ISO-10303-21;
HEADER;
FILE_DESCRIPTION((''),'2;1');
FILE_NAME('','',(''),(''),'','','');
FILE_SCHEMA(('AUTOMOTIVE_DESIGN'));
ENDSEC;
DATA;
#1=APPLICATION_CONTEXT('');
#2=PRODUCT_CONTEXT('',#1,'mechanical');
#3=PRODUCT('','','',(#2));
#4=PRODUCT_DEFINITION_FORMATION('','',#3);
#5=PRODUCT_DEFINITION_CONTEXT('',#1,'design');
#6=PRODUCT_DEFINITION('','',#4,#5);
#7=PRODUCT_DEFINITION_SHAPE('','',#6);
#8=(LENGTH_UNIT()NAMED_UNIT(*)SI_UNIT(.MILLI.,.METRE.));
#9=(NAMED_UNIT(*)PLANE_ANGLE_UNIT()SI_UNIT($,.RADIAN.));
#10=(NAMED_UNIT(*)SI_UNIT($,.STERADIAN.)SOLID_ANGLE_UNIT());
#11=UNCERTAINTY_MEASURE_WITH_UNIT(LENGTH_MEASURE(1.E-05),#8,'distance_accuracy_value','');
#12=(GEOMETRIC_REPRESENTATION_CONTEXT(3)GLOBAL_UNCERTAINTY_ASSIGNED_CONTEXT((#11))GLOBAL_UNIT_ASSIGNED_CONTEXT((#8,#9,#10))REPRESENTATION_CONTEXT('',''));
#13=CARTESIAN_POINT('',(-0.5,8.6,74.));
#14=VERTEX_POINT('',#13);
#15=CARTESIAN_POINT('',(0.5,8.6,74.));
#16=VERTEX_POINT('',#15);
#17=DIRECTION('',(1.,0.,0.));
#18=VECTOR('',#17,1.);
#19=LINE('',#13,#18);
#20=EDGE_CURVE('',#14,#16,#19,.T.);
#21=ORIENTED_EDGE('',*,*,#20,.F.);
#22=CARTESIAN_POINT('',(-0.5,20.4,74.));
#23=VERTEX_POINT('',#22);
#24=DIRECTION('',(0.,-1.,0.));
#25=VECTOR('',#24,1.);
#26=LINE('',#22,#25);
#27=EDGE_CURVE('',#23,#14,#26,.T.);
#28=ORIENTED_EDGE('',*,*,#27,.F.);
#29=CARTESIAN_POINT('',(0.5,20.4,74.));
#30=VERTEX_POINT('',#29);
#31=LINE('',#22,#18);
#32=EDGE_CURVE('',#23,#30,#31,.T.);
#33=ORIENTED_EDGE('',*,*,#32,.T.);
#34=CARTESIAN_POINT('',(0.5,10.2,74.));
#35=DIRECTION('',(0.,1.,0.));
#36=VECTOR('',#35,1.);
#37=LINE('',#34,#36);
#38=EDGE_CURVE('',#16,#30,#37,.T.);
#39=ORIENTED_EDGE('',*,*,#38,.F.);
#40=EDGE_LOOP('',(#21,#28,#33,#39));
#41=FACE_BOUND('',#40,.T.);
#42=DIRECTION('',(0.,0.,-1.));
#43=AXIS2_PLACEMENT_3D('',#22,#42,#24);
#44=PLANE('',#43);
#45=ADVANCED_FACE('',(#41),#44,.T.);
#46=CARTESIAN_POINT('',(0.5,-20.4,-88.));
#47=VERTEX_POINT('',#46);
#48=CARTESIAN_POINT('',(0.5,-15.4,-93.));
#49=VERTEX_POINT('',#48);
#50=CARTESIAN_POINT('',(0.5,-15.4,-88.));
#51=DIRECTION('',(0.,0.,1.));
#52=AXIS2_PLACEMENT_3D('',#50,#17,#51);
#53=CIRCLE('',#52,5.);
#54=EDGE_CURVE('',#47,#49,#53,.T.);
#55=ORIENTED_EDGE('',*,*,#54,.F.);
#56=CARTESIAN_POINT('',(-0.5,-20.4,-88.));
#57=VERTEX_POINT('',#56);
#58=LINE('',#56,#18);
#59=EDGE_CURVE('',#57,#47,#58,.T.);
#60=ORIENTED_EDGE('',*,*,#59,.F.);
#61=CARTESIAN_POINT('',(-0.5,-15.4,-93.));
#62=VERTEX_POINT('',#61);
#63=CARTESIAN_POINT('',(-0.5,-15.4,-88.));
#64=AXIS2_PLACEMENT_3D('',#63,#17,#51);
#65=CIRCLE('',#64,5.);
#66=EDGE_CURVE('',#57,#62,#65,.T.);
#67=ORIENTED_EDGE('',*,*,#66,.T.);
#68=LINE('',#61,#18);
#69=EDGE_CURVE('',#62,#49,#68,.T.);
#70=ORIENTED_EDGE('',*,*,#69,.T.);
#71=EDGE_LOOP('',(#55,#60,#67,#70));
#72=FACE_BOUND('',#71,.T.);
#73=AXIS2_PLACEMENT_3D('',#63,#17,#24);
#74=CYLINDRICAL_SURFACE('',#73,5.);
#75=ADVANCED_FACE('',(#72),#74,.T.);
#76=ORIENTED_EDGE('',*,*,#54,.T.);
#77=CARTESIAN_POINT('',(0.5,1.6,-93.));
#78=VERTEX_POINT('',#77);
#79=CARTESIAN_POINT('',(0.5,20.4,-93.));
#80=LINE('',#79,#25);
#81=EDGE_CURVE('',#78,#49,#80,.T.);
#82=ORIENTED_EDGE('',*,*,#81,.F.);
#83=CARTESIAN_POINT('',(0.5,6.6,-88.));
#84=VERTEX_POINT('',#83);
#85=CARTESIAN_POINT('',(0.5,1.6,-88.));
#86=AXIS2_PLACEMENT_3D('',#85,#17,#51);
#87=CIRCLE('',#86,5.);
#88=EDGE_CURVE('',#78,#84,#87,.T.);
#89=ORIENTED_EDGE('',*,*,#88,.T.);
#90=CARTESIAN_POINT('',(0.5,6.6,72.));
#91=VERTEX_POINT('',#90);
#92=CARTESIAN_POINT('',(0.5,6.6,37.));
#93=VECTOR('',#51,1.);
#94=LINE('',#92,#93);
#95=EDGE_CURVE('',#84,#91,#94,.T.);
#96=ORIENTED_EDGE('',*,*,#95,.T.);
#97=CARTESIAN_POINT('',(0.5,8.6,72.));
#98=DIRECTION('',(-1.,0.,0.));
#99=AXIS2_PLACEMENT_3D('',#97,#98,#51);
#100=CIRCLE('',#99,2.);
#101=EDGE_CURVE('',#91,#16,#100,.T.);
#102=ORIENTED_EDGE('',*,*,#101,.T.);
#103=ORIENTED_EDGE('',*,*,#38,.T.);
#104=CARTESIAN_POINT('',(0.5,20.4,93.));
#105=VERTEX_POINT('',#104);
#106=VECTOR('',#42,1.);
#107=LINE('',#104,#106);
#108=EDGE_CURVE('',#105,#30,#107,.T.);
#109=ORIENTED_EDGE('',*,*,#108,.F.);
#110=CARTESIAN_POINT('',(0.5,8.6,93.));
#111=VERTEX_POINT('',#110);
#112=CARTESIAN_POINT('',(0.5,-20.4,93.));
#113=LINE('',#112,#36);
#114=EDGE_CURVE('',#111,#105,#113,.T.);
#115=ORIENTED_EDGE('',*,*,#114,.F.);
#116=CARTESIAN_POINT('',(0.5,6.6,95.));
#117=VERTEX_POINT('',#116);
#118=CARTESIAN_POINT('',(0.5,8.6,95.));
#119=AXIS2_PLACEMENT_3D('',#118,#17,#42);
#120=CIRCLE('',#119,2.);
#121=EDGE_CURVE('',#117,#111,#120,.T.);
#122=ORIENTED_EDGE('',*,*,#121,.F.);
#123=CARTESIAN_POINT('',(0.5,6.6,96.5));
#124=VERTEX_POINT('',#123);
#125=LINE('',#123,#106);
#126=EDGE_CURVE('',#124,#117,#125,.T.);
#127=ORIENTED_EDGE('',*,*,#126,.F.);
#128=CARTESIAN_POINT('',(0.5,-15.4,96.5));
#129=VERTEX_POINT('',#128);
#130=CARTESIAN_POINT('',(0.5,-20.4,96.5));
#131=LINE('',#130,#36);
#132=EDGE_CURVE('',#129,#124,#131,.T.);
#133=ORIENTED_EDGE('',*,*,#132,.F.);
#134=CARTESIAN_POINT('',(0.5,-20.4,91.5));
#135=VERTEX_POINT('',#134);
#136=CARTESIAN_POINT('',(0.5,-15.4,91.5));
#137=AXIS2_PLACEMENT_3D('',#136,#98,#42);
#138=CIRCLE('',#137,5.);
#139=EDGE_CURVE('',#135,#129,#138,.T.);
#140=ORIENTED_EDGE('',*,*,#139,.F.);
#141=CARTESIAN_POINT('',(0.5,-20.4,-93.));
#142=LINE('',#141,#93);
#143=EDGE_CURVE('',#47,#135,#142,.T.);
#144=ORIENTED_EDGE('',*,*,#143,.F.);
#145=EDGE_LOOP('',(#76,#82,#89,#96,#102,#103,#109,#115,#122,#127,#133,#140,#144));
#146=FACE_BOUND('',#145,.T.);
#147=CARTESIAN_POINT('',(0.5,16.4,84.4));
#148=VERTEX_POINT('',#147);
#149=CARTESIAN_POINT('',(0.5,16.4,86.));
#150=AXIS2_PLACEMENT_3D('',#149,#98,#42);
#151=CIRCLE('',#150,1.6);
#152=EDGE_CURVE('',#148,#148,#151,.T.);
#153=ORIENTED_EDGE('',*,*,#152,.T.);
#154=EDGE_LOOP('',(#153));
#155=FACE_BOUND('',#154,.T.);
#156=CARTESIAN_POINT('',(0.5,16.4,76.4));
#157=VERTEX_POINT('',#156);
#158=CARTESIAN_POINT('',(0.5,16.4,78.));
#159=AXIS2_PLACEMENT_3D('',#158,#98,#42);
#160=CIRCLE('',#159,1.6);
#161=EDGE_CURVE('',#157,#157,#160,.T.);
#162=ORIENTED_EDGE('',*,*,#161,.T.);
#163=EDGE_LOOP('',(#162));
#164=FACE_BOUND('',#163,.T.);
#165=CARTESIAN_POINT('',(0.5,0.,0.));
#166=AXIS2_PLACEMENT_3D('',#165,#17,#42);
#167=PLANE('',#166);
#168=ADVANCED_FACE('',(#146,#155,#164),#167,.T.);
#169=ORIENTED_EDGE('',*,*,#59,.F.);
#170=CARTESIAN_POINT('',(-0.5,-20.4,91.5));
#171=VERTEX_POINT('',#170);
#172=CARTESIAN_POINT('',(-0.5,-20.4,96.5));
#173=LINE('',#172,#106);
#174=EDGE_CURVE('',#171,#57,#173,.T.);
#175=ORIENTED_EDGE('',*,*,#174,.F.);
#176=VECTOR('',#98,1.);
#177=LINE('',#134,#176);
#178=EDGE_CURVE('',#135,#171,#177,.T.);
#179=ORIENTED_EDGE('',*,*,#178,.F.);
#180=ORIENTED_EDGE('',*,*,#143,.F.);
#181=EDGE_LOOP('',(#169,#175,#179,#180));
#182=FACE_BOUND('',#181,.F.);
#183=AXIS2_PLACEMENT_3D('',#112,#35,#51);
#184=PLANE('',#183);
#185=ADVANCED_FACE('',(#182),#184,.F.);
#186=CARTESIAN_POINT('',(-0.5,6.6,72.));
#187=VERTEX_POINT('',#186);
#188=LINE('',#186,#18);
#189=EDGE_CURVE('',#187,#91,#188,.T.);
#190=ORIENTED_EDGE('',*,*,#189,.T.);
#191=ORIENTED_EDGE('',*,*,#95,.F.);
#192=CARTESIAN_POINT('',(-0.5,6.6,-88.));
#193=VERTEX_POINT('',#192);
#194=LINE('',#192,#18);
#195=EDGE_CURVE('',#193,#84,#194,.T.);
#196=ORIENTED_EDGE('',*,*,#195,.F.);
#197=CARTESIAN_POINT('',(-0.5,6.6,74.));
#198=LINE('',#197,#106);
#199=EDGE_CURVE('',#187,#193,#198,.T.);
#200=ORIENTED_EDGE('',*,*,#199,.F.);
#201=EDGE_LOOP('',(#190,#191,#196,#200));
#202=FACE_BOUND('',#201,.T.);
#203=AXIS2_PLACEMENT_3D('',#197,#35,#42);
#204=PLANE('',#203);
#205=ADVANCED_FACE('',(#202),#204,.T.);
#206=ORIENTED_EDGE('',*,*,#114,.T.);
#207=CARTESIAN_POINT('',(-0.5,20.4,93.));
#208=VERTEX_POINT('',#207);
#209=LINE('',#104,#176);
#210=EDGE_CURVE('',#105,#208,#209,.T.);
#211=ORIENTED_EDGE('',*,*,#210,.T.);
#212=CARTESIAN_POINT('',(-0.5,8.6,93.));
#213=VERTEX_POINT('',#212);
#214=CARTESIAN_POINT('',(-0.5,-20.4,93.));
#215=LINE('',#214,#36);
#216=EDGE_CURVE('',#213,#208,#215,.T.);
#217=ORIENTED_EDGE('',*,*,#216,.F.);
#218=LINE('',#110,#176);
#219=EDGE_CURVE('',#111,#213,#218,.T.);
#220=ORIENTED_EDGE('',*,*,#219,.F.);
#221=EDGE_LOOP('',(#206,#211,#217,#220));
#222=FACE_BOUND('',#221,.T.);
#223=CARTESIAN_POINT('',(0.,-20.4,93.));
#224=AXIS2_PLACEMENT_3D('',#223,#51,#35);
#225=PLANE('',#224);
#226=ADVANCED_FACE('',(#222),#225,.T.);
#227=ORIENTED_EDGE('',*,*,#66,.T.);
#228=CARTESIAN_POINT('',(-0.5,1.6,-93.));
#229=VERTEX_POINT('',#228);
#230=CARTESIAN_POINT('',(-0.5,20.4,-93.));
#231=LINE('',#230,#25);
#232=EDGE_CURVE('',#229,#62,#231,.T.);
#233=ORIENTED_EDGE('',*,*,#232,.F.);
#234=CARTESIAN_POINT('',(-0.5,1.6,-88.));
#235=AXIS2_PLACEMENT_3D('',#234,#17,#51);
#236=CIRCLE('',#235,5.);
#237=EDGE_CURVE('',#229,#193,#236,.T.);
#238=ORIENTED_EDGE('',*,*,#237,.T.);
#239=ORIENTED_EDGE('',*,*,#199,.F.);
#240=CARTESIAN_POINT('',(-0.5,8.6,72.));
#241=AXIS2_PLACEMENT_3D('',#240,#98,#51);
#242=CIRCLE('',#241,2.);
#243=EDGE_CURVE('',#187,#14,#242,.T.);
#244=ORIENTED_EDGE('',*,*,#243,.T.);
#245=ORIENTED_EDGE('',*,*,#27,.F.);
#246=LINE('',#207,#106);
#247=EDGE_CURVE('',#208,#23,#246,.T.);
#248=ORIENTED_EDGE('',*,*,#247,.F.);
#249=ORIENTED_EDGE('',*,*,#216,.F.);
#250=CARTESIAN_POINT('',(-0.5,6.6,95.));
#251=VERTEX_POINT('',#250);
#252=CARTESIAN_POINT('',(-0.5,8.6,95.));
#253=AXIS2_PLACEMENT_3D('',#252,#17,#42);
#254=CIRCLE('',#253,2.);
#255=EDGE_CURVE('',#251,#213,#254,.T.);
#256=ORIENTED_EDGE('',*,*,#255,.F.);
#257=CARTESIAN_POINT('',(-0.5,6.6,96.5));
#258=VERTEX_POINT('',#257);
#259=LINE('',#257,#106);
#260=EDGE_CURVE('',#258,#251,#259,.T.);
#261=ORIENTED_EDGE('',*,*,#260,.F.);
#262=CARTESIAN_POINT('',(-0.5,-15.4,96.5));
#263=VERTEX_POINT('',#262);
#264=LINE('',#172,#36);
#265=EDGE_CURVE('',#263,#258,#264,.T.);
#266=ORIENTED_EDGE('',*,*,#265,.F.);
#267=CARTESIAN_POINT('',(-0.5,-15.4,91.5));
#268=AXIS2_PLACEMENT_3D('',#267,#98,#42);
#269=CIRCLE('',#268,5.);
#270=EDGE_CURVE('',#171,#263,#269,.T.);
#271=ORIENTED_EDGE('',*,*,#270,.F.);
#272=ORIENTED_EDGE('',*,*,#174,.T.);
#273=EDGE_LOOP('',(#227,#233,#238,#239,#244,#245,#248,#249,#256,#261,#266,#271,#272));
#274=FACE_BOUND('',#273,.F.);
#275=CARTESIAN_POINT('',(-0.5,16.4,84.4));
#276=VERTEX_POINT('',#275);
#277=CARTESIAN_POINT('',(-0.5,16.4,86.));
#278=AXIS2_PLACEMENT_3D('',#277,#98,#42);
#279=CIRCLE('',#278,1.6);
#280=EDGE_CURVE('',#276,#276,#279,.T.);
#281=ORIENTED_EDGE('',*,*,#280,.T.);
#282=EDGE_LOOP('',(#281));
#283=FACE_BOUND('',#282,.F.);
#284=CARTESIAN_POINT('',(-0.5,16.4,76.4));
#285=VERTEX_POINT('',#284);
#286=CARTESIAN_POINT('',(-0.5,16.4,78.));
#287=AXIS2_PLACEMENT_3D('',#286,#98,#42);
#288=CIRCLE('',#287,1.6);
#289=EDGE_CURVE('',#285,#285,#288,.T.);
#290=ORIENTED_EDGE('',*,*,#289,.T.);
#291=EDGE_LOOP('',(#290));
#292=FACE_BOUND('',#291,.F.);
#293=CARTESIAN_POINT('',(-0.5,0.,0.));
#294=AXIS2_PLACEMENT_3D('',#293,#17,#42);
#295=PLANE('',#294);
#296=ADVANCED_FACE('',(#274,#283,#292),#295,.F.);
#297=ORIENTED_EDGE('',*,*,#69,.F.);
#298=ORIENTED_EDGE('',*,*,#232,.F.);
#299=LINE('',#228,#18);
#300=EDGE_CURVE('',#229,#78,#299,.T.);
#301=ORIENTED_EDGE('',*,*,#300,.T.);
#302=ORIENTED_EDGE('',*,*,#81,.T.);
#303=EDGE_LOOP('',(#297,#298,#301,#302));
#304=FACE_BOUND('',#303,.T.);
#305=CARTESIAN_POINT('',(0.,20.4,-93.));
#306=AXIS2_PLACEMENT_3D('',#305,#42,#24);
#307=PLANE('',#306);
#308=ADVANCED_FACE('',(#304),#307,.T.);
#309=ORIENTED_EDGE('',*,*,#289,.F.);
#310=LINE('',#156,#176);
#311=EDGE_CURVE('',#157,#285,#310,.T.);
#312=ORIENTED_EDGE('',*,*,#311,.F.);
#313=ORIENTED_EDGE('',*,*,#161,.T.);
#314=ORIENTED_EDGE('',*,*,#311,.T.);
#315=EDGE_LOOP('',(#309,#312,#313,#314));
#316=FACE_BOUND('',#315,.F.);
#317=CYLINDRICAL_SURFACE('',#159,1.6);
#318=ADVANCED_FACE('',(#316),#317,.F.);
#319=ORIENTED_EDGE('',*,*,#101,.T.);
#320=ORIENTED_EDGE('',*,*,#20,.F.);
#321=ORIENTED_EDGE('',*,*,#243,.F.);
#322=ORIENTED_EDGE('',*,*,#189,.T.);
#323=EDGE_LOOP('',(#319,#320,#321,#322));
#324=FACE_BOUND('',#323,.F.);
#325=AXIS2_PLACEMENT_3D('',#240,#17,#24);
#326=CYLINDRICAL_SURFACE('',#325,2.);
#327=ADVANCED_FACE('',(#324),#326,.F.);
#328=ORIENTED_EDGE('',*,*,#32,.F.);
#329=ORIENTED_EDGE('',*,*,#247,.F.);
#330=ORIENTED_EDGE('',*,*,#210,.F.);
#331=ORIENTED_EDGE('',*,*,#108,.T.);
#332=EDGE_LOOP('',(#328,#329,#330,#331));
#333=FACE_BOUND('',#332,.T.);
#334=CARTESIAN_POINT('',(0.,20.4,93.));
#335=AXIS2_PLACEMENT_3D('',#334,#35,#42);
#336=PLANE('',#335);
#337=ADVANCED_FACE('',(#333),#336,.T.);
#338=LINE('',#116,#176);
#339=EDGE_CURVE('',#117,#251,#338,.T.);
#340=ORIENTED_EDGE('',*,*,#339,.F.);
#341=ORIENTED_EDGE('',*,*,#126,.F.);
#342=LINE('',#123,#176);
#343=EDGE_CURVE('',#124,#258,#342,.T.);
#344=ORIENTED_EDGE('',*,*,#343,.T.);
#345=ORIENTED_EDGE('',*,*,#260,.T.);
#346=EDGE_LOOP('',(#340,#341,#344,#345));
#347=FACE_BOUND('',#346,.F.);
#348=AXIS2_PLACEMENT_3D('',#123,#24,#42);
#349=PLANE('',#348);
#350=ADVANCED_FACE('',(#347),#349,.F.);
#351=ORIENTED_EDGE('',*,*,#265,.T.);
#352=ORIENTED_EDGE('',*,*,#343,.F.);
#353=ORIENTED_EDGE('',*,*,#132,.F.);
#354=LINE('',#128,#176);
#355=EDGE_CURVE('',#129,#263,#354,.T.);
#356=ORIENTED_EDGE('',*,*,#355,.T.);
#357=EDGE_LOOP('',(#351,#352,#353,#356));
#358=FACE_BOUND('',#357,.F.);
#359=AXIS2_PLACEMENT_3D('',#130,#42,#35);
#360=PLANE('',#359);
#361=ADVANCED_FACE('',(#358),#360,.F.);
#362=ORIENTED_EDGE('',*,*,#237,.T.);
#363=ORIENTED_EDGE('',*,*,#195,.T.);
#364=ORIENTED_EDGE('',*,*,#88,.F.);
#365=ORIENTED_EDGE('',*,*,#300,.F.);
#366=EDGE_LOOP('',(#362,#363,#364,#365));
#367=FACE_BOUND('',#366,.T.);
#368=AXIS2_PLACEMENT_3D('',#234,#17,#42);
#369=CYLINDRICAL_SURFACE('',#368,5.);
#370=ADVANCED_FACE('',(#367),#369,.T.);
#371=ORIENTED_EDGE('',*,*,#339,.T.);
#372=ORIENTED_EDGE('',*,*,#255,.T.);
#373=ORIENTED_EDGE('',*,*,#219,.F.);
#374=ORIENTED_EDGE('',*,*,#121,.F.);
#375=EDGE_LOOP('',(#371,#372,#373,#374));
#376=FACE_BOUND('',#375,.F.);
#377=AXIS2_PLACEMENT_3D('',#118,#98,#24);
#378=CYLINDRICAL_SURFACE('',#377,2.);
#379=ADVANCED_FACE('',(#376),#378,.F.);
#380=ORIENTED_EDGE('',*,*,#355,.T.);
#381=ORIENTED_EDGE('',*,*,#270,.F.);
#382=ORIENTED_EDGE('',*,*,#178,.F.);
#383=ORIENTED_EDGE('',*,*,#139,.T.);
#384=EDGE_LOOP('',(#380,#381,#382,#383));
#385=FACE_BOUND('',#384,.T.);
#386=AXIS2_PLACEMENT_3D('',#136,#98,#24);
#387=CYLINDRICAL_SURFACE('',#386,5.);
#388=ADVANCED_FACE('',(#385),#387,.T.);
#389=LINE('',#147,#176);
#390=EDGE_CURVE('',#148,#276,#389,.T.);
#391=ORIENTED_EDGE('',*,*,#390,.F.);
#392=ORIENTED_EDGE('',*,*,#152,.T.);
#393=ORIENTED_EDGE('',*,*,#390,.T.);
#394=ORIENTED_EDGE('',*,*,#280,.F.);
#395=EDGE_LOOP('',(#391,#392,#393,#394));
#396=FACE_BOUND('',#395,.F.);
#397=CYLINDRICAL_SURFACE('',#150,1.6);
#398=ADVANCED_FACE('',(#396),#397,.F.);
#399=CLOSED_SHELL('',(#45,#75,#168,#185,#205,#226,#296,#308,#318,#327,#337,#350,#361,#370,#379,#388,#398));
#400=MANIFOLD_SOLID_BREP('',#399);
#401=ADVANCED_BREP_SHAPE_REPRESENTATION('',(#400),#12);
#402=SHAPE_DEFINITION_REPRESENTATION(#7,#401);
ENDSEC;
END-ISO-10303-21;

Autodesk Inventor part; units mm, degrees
ref_plane "YZ Plane" through (0, 0, 0) normal (1, 0, 0) x (0, 1, 0)
ref_plane "XZ Plane" through (0, 0, 0) normal (0, 1, 0) x (-1, 0, 0)
ref_plane "XY Plane" through (0, 0, 0) normal (0, 0, 1) x (1, 0, 0)
sketch "スケッチ1" plane through (0, 0, 0) normal (1, 0, 0) x (0, 1, 0)
  line L0 (-20.4, 93) -> (20.4, 93)
  line L1 (20.4, 93) -> (20.4, -93)
  line L2 (20.4, -93) -> (-20.4, -93)
  line L3 (-20.4, -93) -> (-20.4, 93)
  line L4 (-20.4, 93) -> (20.4, -93) construction
  line L5 (20.4, 93) -> (-20.4, -93) construction
  line L6 (20.4, 93) -> (-20.4, 93)
  line L7 (-20.4, 93) -> (-20.4, 95)
  line L8 (-20.4, 95) -> (20.4, 95)
  line L9 (20.4, 95) -> (20.4, 93)
  point P0 (0, 0)
  dimension "d0" = 40.8
  dimension "d1" = 186
  dimension "d19" = 2
extrude "プレート1" add sketch "スケッチ1" along normal mid plane 1 contours L0 L1 L2 L3
sketch "スケッチ2" plane through (0.5, 0, 0) normal (1, 0, 0) x (0, 0, -1)
  line L0 (-93, 20.4) -> (93, 20.4) projected
  line L1 (-93, -20.4) -> (-93, 20.4) projected
  point P0 (0, 0)
  point P1 (-86, 16.4)
  point P2 (-78, 16.4)
  dimension "d3" = 4
  dimension "d4" = 7
  dimension "d5" = 8
hole "穴1" at (0.5, 16.4, 86) at (0.5, 16.4, 78) direction (-1, 0, 0) diameter 3.2 end through all clearance for "Socket Head Cap Screw" size "M3" standard "Ansi Metric M Profile"
sketch "スケッチ3" plane through (-0.5, 0, 0) normal (-1, 0, 0) x (0, 0, 1)
  line L0 (-93, 20.4) -> (-93, -20.4) projected
  line L1 (-93, 20.4) -> (74, 20.4)
  line L2 (74, 20.4) -> (74, 6.6)
  line L3 (74, 6.6) -> (-93, 6.6)
  line L4 (-93, 6.6) -> (-93, 20.4)
  line L5 (-93, -20.4) -> (93, -20.4) projected
  line L6 (93, -20.4) -> (93, 20.4) projected
  point P0 (0, 0)
  point P1 (-93, 6.6)
  dimension "d14" = 19
  dimension "d18" = 13.8
extrude "押し出し1" cut sketch "スケッチ3" against normal blind 10
sketch "スケッチ5" plane through (0.5, 0, 0) normal (1, 0, 0) x (0, 0, -1)
  line L0 (93, -20.4) -> (-93, -20.4)
  line L1 (-93, -20.4) -> (-96.5, -20.4)
  line L2 (-96.5, -20.4) -> (-96.5, 6.6)
  line L3 (-96.5, 6.6) -> (-93, 6.6)
  line L4 (-93, 6.6) -> (-93, -20.4)
  point P0 (0, 0)
  point P1 (-93, 20.4)
  dimension "d34" = 27
  dimension "d35" = 3.5
sheet face with bend "面3" sketch "スケッチ5" thickness 1 toward (-1, 0, 0) bend radius 1
bend "曲げ2"
fillet "コーナーR3" radius 5 3 edges at (0, -20.4, -93) (0, -20.4, 96.5) (0, 6.6, -93)
fillet "コーナーR4" radius 2 2 edges at (0, 6.6, 93) (0, 6.6, 74)
equation "\"d11\" = Thickness"
equation "\"d2\" = Thickness"
equation "\"d28\" = BendRadius"
equation "\"d29\" = BendReliefWidth"
equation "\"d31\" = MinimumRemnant"
equation "\"d30\" = BendReliefDepth"
equation "\"d32\" = TransitionRadius"
equation "\"BendRadius\" = Thickness"
equation "\"BendReliefWidth\" = Thickness"
equation "\"BendReliefDepth\" = 0.5 * Thickness"
equation "\"CornerReliefSize\" = 4 * Thickness"
equation "\"MinimumRemnant\" = 2 * Thickness"
equation "\"TransitionRadius\" = BendRadius"
equation "\"JacobiRadiusSize\" = BendRadius"
equation "\"GapSize\" = Thickness"
equation "\"Thickness\" = 1"
properties part number "s_carbon_plate2" material "CFRP"
